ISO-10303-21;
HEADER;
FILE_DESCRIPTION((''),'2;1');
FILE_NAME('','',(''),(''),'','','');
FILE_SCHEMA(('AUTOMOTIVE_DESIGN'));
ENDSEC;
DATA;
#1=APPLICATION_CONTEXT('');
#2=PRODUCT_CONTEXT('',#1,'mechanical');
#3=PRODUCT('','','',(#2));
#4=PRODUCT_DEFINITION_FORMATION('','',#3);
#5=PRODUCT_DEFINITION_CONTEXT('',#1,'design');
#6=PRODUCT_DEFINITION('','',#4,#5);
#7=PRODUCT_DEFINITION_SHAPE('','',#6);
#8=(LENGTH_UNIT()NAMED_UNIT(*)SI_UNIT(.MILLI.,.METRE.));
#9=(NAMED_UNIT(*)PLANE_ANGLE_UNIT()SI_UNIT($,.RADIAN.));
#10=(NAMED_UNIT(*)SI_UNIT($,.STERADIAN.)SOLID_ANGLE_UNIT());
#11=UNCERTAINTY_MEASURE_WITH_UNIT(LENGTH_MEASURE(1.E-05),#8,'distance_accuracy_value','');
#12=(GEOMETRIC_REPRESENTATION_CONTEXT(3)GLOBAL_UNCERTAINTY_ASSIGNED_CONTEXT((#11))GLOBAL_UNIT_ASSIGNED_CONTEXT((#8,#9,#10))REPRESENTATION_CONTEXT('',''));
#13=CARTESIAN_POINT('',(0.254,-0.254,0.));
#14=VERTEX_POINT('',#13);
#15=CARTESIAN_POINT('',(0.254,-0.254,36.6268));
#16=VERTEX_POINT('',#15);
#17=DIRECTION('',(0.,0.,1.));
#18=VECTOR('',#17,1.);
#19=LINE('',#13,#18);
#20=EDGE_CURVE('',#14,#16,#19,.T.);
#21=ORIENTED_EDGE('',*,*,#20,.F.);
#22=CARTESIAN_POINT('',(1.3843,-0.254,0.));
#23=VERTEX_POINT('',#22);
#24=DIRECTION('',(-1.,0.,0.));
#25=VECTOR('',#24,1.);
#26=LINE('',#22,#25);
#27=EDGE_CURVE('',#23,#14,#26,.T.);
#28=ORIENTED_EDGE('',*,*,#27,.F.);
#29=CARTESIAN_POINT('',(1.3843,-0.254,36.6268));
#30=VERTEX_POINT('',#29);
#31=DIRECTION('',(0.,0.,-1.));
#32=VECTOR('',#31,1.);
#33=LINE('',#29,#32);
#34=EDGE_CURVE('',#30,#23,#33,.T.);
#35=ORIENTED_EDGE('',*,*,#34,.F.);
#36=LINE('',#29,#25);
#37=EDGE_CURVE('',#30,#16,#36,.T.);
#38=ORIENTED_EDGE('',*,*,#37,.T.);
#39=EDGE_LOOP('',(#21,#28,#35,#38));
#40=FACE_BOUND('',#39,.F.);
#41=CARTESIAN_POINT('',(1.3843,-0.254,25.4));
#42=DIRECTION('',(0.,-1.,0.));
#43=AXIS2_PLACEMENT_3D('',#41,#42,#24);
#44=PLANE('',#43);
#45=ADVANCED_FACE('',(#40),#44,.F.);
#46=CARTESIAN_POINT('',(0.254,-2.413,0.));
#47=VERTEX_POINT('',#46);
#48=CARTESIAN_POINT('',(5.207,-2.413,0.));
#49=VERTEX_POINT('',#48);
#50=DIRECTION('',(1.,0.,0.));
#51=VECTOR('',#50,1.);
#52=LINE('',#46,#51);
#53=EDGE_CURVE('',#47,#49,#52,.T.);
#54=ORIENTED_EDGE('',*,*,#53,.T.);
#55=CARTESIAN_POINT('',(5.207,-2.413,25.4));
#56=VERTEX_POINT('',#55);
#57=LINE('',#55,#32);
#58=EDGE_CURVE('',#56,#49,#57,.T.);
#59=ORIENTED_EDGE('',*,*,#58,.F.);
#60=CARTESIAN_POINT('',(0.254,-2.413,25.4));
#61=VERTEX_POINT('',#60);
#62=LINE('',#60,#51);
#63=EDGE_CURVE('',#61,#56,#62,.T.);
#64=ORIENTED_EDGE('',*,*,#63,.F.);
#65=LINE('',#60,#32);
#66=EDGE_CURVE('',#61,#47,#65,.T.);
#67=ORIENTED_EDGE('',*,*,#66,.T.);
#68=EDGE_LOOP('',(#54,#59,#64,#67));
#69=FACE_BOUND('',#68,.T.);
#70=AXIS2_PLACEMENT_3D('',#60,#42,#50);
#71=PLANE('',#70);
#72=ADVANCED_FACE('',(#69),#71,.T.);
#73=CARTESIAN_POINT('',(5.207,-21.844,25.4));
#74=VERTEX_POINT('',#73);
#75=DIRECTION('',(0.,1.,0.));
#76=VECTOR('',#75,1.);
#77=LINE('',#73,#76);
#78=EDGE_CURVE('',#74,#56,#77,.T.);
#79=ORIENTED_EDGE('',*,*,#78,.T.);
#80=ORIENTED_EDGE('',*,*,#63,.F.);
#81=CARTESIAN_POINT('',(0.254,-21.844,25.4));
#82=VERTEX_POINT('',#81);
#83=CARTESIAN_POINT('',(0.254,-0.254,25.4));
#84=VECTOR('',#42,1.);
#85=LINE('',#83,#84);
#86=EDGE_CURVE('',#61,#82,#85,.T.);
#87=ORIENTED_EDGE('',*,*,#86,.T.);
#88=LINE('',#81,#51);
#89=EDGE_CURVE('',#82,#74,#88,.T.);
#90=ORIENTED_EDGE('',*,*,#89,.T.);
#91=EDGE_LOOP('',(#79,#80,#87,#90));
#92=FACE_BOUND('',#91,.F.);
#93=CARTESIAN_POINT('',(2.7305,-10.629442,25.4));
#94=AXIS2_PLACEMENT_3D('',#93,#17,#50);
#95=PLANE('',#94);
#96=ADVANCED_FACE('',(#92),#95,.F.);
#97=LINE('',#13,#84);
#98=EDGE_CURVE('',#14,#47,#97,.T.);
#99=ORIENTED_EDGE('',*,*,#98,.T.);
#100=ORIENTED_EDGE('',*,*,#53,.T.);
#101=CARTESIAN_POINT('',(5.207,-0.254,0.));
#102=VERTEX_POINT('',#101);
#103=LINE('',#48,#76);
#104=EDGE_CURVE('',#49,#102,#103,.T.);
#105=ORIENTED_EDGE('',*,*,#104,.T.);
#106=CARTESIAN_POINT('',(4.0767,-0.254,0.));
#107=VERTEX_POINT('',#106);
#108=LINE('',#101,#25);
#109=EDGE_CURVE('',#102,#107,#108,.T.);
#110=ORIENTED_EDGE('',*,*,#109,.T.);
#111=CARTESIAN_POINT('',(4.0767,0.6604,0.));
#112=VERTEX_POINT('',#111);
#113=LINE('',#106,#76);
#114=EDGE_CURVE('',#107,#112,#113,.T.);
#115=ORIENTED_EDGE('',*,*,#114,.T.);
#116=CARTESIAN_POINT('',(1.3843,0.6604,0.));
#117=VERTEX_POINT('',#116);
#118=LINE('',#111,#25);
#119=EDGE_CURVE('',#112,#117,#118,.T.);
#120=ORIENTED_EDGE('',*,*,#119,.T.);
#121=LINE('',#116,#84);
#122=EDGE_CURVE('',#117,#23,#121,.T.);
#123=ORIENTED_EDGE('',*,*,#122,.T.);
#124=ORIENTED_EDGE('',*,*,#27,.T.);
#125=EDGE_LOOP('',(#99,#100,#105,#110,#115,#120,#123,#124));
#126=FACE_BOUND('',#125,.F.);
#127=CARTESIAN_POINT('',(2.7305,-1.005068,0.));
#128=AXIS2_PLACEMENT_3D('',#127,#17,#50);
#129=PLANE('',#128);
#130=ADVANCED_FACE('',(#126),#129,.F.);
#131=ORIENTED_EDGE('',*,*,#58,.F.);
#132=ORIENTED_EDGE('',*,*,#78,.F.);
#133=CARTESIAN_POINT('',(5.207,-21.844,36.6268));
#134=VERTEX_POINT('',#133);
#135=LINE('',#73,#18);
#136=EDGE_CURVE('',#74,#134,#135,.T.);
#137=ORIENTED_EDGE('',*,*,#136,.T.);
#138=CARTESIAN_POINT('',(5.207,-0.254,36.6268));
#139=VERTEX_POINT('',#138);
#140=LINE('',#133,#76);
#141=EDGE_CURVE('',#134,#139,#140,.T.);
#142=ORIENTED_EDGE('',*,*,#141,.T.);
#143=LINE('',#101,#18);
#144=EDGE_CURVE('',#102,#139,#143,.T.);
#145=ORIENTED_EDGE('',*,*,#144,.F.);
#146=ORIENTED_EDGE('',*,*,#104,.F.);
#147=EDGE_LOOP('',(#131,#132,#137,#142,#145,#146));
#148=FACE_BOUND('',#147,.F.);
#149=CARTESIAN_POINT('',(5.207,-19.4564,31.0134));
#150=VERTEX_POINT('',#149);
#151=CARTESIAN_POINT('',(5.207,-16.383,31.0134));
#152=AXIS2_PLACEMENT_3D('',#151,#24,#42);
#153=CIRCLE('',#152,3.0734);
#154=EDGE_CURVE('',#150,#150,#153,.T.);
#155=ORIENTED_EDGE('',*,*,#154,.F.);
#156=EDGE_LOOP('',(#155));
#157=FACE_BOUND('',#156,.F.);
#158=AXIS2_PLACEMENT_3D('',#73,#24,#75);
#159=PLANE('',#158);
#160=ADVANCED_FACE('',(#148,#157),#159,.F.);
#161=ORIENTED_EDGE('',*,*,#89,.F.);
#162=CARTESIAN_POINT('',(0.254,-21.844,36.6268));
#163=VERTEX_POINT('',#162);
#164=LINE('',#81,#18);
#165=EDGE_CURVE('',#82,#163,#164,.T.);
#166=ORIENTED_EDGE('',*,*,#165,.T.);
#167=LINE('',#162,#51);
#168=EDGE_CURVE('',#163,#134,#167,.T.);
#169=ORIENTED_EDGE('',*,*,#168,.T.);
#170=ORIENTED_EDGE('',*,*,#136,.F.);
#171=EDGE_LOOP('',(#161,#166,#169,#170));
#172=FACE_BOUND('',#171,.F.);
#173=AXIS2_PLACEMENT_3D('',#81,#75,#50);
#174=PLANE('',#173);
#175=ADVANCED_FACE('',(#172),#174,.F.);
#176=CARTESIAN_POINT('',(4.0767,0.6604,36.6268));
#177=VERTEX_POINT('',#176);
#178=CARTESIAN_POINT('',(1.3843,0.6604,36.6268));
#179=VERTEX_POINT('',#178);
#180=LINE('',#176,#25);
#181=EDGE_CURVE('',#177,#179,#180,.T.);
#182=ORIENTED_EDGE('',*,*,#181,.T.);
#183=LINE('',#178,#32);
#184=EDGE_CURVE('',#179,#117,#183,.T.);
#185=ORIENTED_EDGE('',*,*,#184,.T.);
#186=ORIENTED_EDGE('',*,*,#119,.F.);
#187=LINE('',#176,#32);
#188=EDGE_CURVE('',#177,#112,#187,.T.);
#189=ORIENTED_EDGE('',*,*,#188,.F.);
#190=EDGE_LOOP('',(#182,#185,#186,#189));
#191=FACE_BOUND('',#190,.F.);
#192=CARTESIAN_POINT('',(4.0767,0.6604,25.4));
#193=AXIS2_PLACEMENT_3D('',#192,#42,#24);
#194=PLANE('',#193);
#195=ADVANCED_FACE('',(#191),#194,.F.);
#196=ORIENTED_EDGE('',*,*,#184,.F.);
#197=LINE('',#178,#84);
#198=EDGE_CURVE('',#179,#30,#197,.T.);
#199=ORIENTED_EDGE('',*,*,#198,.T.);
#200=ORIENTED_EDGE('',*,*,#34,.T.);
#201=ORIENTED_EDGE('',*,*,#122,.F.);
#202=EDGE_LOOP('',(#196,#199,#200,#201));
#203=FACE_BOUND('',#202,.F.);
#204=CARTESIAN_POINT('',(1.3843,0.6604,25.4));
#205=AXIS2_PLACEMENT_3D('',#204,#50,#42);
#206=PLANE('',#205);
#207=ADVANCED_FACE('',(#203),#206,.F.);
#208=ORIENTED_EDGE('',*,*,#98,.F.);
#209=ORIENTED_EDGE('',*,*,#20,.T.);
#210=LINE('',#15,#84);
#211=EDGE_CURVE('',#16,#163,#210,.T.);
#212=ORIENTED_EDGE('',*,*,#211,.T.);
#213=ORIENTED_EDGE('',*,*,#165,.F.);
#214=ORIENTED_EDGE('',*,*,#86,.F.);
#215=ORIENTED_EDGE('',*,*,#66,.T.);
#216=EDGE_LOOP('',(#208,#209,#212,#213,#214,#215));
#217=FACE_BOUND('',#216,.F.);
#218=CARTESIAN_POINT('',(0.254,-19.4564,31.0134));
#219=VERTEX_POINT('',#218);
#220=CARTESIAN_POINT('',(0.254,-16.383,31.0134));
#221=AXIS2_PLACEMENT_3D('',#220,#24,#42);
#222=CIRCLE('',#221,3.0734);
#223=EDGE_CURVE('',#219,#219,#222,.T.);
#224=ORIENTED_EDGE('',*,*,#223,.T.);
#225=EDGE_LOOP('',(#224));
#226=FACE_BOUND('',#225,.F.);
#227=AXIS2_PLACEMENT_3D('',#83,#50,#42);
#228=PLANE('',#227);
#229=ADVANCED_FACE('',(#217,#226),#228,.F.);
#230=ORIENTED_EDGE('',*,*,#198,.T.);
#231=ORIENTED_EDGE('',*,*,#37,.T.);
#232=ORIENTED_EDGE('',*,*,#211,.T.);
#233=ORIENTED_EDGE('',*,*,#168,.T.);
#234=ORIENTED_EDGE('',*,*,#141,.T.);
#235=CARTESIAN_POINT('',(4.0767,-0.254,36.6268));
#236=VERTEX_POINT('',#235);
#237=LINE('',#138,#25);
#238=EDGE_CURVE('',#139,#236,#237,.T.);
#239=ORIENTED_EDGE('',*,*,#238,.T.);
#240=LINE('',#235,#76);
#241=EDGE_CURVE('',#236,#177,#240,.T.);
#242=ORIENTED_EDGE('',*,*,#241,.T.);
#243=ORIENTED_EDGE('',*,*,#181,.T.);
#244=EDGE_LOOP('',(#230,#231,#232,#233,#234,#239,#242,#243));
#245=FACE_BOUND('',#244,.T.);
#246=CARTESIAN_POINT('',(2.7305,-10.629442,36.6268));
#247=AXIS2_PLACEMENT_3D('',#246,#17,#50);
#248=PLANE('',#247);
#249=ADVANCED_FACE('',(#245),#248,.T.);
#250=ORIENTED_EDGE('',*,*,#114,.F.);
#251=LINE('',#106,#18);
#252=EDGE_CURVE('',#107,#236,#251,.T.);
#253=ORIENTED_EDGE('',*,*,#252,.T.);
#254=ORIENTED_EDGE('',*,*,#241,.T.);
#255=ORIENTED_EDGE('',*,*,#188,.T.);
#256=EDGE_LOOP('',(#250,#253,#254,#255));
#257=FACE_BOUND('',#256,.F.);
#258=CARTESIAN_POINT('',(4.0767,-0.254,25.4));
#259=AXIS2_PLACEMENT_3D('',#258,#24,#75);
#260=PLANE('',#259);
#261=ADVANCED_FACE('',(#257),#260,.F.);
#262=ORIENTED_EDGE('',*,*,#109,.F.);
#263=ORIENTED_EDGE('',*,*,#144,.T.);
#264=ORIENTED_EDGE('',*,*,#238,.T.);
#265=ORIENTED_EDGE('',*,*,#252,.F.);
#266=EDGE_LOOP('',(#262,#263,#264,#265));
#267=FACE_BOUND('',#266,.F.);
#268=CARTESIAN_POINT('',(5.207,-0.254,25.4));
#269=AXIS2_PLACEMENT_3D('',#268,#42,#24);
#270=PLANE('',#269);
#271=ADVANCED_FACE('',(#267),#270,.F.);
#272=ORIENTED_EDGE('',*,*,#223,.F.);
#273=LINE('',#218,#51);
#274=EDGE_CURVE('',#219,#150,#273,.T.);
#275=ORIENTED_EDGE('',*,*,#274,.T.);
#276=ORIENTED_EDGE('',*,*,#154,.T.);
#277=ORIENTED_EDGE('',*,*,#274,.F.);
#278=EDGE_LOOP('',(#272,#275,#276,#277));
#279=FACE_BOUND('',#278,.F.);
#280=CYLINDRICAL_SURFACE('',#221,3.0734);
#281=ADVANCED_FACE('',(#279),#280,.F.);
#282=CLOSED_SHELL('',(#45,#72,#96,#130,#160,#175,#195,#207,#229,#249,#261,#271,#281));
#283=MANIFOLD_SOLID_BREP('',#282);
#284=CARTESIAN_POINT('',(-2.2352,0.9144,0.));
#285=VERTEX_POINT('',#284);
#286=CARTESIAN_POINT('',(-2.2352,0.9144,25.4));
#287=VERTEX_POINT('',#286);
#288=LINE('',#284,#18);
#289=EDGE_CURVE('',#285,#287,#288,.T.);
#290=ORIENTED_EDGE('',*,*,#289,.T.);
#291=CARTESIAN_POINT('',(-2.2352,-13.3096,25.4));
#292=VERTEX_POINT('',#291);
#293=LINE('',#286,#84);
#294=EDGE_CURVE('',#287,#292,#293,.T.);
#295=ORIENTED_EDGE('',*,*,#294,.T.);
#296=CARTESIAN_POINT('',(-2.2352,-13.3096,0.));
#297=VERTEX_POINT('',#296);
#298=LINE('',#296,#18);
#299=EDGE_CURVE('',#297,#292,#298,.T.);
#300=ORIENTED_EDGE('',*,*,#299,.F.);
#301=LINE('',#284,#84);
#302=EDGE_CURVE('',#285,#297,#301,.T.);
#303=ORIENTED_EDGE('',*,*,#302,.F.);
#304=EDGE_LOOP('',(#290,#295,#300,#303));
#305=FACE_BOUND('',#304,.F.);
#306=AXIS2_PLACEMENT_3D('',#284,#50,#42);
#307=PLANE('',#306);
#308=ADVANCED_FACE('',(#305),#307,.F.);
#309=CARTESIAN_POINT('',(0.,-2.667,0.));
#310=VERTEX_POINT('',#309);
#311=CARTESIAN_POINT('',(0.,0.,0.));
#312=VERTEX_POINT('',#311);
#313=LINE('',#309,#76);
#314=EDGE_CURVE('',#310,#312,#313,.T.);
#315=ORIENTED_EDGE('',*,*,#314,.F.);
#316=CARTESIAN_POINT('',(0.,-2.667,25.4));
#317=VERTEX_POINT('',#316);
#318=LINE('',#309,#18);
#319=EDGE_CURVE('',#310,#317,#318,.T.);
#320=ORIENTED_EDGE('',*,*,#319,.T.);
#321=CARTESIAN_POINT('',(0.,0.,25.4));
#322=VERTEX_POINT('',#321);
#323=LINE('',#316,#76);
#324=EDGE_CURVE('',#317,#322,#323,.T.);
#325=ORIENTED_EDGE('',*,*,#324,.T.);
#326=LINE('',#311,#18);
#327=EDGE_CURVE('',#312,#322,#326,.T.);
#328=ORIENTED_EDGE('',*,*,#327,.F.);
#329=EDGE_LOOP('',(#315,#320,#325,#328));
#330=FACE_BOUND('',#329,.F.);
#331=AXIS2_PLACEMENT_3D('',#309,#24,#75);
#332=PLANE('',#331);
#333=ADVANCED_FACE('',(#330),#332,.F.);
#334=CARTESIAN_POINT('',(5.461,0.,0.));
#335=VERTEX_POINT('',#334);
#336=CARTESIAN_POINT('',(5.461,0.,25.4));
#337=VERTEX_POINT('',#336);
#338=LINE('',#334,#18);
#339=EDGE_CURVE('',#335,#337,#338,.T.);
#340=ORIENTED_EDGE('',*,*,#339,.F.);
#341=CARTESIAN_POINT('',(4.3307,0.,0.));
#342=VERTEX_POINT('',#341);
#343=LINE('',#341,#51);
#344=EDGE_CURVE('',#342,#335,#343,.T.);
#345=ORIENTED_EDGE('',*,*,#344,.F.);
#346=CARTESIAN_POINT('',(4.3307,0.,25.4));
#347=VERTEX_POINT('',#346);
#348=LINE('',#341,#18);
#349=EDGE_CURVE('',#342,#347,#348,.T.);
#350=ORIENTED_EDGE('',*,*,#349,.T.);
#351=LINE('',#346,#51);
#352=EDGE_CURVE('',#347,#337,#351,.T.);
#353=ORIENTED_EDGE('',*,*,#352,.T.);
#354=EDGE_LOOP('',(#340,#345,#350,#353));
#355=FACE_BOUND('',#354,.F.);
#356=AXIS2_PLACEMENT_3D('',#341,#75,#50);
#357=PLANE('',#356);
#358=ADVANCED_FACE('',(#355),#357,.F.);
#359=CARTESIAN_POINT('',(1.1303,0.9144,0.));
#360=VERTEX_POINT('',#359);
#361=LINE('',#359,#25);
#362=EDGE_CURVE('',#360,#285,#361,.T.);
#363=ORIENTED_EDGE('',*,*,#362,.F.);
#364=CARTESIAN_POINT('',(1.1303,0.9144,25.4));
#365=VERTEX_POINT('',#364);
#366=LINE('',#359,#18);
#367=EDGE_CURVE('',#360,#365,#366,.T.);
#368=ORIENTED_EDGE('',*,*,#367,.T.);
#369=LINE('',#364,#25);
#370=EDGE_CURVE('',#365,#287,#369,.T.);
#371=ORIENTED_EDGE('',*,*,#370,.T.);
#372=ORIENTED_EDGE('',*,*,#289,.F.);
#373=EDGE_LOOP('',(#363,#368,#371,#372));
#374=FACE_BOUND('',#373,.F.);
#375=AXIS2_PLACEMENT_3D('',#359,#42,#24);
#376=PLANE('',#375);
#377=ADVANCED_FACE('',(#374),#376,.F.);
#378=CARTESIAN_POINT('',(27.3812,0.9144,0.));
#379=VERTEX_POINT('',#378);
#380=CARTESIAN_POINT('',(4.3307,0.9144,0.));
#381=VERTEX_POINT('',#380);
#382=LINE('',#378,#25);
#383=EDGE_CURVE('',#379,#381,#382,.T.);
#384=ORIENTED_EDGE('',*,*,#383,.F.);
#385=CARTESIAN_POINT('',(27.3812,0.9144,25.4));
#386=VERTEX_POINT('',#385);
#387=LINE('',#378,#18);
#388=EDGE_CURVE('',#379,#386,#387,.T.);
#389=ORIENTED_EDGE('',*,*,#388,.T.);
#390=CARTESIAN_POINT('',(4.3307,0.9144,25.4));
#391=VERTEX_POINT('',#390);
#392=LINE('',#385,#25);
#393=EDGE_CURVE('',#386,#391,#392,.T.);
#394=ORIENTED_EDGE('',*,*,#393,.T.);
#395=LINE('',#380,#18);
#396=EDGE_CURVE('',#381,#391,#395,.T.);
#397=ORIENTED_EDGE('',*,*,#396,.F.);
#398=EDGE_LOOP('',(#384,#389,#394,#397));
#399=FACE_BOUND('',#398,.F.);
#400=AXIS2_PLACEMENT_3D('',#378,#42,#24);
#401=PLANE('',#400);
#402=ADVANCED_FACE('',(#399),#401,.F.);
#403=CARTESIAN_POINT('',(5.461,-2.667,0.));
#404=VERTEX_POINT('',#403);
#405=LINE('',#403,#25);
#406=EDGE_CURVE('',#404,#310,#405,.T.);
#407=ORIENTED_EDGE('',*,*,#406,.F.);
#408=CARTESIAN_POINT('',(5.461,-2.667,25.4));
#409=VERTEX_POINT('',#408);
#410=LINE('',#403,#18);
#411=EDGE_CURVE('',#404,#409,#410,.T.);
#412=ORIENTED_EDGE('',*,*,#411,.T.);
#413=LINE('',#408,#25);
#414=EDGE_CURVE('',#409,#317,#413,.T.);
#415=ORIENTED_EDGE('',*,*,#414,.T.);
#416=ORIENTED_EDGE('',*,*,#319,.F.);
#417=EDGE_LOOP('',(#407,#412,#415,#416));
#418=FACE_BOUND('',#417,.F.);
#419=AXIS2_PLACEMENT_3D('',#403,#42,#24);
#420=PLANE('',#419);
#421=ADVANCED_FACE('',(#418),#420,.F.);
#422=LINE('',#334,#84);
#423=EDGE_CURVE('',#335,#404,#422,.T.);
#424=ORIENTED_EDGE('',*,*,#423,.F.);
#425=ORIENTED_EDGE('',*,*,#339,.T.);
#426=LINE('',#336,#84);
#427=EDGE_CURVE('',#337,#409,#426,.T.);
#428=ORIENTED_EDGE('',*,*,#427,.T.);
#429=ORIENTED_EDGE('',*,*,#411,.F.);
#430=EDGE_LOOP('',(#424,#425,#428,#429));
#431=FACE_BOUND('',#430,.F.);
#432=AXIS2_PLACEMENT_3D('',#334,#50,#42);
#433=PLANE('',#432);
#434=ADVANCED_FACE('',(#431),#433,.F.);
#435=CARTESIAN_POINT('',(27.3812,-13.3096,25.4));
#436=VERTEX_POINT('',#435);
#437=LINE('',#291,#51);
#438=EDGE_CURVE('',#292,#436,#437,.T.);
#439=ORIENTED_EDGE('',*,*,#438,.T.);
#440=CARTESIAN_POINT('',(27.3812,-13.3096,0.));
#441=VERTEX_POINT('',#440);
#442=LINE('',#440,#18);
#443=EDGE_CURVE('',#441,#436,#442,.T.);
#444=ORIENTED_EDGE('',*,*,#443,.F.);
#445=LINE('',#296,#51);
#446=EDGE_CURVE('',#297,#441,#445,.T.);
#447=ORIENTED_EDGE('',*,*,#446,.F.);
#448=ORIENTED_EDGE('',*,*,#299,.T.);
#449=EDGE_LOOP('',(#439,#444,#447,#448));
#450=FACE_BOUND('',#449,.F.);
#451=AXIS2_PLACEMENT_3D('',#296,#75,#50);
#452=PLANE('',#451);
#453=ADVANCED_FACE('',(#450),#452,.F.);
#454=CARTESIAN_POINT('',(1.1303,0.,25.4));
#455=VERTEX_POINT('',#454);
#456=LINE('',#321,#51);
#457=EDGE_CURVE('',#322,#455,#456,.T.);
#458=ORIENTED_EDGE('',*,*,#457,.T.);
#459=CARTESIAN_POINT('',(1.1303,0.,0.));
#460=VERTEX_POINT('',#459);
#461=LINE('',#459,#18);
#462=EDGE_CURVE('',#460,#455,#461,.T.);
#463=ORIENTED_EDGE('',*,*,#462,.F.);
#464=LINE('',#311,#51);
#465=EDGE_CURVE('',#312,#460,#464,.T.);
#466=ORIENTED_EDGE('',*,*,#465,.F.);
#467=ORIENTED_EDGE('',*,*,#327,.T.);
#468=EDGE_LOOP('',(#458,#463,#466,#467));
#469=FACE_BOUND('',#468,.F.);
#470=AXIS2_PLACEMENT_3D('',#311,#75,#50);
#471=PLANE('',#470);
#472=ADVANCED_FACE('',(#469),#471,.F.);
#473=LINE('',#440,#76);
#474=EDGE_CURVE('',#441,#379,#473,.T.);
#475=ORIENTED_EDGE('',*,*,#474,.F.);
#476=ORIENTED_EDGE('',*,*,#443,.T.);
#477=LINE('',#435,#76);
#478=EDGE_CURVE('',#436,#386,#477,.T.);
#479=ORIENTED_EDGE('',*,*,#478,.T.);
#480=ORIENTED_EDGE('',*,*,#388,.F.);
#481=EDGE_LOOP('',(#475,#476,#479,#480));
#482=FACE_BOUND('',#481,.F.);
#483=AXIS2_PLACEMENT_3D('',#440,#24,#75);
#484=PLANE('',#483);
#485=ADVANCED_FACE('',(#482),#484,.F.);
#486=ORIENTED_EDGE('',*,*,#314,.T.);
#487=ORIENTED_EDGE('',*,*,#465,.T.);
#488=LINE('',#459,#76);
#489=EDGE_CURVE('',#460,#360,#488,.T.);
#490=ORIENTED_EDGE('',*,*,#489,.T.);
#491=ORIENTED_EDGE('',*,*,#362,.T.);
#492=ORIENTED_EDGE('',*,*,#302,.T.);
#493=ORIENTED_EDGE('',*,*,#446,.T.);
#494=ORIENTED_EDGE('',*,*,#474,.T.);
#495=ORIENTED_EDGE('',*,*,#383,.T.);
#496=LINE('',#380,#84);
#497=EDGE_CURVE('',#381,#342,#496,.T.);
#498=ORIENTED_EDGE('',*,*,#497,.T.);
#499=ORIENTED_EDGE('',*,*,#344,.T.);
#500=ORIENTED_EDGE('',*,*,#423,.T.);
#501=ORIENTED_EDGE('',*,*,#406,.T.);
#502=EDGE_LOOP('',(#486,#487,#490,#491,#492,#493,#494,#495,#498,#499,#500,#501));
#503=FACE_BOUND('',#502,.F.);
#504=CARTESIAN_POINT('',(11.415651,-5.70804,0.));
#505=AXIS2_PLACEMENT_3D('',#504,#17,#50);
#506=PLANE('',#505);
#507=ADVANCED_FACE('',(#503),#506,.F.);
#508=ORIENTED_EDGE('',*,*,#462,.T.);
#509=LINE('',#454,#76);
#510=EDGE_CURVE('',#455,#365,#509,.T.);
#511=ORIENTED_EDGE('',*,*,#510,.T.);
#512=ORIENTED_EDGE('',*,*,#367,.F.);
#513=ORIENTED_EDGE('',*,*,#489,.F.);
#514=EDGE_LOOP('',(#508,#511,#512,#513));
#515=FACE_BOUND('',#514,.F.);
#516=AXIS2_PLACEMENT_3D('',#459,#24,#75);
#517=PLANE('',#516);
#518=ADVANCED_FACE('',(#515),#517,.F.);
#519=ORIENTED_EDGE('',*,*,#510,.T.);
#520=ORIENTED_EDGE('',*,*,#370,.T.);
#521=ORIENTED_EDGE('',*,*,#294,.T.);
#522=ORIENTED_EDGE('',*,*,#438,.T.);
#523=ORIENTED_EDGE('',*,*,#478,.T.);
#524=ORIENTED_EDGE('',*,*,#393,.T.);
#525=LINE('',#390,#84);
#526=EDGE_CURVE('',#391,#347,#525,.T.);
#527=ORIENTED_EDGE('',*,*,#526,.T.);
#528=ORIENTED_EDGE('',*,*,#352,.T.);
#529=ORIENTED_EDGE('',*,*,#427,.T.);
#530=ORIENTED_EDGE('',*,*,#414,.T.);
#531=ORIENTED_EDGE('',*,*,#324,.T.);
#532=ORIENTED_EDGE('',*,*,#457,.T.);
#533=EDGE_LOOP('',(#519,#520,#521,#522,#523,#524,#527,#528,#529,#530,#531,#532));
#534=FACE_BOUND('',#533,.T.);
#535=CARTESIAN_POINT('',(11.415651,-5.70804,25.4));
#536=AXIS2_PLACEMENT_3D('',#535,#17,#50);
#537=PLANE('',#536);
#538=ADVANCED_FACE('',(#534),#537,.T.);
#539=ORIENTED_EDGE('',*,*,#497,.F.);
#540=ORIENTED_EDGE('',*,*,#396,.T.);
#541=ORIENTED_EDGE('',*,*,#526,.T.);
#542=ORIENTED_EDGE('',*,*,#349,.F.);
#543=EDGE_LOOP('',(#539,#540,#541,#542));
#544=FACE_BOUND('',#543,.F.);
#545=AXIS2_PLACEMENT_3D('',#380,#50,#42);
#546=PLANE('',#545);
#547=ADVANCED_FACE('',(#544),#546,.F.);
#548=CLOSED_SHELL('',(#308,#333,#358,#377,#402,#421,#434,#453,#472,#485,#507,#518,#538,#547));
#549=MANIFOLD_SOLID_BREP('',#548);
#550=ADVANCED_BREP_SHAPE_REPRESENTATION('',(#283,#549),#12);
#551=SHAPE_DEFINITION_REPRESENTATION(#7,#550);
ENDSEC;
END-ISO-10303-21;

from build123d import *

# Parameters (mm, degrees)
F1_DEPTH = 25.4
F3_DEPTH = 25.4
F5_DEPTH = 11.2268
F6_R     = 3.0734
F7_DEPTH = 4.953


with BuildPart() as f1:
    # F0 (on Top) → F1 (new body)
    with BuildSketch(Plane.XY):
        Polygon((0, -2.667), (0, 0), (1.1303, 0), (1.1303, 0.9144), (-2.2352, 0.9144), (-2.2352, -13.3096), (27.3812, -13.3096), (27.3812, 0.9144), (4.3307, 0.9144), (4.3307, 0), (5.461, 0), (5.461, -2.667), align=None)
    extrude(amount=F1_DEPTH)


with BuildPart() as f3:
    # F2 (on face) → F3 (new body, through all)
    with BuildSketch(Plane.XY.offset(25.4)):
        Polygon((1.3843, -0.254), (0.254, -0.254), (0.254, -2.413), (5.207, -2.413), (5.207, -0.254), (4.0767, -0.254), (4.0767, 0.6604), (1.3843, 0.6604), align=None)
    extrude(amount=-F3_DEPTH)

    # F4 (on face) → F5 (join)
    with BuildSketch(Plane.XY.offset(25.4)):
        Polygon((1.3843, -0.254), (0.254, -0.254), (0.254, -21.844), (5.207, -21.844), (5.207, -0.254), (4.0767, -0.254), (4.0767, 0.6604), (1.3843, 0.6604), align=None)
    extrude(amount=F5_DEPTH)

    # F6 (on face) → F7 (cut, through all)
    with BuildSketch(Plane(origin=(0.254, 0, 0), x_dir=(0, -1, 0), z_dir=(-1, 0, 0))):
        with Locations((16.383, 31.0134)):
            Circle(F6_R)
    extrude(amount=-F7_DEPTH, mode=Mode.SUBTRACT)


solid = Compound([f1.part, f3.part])
